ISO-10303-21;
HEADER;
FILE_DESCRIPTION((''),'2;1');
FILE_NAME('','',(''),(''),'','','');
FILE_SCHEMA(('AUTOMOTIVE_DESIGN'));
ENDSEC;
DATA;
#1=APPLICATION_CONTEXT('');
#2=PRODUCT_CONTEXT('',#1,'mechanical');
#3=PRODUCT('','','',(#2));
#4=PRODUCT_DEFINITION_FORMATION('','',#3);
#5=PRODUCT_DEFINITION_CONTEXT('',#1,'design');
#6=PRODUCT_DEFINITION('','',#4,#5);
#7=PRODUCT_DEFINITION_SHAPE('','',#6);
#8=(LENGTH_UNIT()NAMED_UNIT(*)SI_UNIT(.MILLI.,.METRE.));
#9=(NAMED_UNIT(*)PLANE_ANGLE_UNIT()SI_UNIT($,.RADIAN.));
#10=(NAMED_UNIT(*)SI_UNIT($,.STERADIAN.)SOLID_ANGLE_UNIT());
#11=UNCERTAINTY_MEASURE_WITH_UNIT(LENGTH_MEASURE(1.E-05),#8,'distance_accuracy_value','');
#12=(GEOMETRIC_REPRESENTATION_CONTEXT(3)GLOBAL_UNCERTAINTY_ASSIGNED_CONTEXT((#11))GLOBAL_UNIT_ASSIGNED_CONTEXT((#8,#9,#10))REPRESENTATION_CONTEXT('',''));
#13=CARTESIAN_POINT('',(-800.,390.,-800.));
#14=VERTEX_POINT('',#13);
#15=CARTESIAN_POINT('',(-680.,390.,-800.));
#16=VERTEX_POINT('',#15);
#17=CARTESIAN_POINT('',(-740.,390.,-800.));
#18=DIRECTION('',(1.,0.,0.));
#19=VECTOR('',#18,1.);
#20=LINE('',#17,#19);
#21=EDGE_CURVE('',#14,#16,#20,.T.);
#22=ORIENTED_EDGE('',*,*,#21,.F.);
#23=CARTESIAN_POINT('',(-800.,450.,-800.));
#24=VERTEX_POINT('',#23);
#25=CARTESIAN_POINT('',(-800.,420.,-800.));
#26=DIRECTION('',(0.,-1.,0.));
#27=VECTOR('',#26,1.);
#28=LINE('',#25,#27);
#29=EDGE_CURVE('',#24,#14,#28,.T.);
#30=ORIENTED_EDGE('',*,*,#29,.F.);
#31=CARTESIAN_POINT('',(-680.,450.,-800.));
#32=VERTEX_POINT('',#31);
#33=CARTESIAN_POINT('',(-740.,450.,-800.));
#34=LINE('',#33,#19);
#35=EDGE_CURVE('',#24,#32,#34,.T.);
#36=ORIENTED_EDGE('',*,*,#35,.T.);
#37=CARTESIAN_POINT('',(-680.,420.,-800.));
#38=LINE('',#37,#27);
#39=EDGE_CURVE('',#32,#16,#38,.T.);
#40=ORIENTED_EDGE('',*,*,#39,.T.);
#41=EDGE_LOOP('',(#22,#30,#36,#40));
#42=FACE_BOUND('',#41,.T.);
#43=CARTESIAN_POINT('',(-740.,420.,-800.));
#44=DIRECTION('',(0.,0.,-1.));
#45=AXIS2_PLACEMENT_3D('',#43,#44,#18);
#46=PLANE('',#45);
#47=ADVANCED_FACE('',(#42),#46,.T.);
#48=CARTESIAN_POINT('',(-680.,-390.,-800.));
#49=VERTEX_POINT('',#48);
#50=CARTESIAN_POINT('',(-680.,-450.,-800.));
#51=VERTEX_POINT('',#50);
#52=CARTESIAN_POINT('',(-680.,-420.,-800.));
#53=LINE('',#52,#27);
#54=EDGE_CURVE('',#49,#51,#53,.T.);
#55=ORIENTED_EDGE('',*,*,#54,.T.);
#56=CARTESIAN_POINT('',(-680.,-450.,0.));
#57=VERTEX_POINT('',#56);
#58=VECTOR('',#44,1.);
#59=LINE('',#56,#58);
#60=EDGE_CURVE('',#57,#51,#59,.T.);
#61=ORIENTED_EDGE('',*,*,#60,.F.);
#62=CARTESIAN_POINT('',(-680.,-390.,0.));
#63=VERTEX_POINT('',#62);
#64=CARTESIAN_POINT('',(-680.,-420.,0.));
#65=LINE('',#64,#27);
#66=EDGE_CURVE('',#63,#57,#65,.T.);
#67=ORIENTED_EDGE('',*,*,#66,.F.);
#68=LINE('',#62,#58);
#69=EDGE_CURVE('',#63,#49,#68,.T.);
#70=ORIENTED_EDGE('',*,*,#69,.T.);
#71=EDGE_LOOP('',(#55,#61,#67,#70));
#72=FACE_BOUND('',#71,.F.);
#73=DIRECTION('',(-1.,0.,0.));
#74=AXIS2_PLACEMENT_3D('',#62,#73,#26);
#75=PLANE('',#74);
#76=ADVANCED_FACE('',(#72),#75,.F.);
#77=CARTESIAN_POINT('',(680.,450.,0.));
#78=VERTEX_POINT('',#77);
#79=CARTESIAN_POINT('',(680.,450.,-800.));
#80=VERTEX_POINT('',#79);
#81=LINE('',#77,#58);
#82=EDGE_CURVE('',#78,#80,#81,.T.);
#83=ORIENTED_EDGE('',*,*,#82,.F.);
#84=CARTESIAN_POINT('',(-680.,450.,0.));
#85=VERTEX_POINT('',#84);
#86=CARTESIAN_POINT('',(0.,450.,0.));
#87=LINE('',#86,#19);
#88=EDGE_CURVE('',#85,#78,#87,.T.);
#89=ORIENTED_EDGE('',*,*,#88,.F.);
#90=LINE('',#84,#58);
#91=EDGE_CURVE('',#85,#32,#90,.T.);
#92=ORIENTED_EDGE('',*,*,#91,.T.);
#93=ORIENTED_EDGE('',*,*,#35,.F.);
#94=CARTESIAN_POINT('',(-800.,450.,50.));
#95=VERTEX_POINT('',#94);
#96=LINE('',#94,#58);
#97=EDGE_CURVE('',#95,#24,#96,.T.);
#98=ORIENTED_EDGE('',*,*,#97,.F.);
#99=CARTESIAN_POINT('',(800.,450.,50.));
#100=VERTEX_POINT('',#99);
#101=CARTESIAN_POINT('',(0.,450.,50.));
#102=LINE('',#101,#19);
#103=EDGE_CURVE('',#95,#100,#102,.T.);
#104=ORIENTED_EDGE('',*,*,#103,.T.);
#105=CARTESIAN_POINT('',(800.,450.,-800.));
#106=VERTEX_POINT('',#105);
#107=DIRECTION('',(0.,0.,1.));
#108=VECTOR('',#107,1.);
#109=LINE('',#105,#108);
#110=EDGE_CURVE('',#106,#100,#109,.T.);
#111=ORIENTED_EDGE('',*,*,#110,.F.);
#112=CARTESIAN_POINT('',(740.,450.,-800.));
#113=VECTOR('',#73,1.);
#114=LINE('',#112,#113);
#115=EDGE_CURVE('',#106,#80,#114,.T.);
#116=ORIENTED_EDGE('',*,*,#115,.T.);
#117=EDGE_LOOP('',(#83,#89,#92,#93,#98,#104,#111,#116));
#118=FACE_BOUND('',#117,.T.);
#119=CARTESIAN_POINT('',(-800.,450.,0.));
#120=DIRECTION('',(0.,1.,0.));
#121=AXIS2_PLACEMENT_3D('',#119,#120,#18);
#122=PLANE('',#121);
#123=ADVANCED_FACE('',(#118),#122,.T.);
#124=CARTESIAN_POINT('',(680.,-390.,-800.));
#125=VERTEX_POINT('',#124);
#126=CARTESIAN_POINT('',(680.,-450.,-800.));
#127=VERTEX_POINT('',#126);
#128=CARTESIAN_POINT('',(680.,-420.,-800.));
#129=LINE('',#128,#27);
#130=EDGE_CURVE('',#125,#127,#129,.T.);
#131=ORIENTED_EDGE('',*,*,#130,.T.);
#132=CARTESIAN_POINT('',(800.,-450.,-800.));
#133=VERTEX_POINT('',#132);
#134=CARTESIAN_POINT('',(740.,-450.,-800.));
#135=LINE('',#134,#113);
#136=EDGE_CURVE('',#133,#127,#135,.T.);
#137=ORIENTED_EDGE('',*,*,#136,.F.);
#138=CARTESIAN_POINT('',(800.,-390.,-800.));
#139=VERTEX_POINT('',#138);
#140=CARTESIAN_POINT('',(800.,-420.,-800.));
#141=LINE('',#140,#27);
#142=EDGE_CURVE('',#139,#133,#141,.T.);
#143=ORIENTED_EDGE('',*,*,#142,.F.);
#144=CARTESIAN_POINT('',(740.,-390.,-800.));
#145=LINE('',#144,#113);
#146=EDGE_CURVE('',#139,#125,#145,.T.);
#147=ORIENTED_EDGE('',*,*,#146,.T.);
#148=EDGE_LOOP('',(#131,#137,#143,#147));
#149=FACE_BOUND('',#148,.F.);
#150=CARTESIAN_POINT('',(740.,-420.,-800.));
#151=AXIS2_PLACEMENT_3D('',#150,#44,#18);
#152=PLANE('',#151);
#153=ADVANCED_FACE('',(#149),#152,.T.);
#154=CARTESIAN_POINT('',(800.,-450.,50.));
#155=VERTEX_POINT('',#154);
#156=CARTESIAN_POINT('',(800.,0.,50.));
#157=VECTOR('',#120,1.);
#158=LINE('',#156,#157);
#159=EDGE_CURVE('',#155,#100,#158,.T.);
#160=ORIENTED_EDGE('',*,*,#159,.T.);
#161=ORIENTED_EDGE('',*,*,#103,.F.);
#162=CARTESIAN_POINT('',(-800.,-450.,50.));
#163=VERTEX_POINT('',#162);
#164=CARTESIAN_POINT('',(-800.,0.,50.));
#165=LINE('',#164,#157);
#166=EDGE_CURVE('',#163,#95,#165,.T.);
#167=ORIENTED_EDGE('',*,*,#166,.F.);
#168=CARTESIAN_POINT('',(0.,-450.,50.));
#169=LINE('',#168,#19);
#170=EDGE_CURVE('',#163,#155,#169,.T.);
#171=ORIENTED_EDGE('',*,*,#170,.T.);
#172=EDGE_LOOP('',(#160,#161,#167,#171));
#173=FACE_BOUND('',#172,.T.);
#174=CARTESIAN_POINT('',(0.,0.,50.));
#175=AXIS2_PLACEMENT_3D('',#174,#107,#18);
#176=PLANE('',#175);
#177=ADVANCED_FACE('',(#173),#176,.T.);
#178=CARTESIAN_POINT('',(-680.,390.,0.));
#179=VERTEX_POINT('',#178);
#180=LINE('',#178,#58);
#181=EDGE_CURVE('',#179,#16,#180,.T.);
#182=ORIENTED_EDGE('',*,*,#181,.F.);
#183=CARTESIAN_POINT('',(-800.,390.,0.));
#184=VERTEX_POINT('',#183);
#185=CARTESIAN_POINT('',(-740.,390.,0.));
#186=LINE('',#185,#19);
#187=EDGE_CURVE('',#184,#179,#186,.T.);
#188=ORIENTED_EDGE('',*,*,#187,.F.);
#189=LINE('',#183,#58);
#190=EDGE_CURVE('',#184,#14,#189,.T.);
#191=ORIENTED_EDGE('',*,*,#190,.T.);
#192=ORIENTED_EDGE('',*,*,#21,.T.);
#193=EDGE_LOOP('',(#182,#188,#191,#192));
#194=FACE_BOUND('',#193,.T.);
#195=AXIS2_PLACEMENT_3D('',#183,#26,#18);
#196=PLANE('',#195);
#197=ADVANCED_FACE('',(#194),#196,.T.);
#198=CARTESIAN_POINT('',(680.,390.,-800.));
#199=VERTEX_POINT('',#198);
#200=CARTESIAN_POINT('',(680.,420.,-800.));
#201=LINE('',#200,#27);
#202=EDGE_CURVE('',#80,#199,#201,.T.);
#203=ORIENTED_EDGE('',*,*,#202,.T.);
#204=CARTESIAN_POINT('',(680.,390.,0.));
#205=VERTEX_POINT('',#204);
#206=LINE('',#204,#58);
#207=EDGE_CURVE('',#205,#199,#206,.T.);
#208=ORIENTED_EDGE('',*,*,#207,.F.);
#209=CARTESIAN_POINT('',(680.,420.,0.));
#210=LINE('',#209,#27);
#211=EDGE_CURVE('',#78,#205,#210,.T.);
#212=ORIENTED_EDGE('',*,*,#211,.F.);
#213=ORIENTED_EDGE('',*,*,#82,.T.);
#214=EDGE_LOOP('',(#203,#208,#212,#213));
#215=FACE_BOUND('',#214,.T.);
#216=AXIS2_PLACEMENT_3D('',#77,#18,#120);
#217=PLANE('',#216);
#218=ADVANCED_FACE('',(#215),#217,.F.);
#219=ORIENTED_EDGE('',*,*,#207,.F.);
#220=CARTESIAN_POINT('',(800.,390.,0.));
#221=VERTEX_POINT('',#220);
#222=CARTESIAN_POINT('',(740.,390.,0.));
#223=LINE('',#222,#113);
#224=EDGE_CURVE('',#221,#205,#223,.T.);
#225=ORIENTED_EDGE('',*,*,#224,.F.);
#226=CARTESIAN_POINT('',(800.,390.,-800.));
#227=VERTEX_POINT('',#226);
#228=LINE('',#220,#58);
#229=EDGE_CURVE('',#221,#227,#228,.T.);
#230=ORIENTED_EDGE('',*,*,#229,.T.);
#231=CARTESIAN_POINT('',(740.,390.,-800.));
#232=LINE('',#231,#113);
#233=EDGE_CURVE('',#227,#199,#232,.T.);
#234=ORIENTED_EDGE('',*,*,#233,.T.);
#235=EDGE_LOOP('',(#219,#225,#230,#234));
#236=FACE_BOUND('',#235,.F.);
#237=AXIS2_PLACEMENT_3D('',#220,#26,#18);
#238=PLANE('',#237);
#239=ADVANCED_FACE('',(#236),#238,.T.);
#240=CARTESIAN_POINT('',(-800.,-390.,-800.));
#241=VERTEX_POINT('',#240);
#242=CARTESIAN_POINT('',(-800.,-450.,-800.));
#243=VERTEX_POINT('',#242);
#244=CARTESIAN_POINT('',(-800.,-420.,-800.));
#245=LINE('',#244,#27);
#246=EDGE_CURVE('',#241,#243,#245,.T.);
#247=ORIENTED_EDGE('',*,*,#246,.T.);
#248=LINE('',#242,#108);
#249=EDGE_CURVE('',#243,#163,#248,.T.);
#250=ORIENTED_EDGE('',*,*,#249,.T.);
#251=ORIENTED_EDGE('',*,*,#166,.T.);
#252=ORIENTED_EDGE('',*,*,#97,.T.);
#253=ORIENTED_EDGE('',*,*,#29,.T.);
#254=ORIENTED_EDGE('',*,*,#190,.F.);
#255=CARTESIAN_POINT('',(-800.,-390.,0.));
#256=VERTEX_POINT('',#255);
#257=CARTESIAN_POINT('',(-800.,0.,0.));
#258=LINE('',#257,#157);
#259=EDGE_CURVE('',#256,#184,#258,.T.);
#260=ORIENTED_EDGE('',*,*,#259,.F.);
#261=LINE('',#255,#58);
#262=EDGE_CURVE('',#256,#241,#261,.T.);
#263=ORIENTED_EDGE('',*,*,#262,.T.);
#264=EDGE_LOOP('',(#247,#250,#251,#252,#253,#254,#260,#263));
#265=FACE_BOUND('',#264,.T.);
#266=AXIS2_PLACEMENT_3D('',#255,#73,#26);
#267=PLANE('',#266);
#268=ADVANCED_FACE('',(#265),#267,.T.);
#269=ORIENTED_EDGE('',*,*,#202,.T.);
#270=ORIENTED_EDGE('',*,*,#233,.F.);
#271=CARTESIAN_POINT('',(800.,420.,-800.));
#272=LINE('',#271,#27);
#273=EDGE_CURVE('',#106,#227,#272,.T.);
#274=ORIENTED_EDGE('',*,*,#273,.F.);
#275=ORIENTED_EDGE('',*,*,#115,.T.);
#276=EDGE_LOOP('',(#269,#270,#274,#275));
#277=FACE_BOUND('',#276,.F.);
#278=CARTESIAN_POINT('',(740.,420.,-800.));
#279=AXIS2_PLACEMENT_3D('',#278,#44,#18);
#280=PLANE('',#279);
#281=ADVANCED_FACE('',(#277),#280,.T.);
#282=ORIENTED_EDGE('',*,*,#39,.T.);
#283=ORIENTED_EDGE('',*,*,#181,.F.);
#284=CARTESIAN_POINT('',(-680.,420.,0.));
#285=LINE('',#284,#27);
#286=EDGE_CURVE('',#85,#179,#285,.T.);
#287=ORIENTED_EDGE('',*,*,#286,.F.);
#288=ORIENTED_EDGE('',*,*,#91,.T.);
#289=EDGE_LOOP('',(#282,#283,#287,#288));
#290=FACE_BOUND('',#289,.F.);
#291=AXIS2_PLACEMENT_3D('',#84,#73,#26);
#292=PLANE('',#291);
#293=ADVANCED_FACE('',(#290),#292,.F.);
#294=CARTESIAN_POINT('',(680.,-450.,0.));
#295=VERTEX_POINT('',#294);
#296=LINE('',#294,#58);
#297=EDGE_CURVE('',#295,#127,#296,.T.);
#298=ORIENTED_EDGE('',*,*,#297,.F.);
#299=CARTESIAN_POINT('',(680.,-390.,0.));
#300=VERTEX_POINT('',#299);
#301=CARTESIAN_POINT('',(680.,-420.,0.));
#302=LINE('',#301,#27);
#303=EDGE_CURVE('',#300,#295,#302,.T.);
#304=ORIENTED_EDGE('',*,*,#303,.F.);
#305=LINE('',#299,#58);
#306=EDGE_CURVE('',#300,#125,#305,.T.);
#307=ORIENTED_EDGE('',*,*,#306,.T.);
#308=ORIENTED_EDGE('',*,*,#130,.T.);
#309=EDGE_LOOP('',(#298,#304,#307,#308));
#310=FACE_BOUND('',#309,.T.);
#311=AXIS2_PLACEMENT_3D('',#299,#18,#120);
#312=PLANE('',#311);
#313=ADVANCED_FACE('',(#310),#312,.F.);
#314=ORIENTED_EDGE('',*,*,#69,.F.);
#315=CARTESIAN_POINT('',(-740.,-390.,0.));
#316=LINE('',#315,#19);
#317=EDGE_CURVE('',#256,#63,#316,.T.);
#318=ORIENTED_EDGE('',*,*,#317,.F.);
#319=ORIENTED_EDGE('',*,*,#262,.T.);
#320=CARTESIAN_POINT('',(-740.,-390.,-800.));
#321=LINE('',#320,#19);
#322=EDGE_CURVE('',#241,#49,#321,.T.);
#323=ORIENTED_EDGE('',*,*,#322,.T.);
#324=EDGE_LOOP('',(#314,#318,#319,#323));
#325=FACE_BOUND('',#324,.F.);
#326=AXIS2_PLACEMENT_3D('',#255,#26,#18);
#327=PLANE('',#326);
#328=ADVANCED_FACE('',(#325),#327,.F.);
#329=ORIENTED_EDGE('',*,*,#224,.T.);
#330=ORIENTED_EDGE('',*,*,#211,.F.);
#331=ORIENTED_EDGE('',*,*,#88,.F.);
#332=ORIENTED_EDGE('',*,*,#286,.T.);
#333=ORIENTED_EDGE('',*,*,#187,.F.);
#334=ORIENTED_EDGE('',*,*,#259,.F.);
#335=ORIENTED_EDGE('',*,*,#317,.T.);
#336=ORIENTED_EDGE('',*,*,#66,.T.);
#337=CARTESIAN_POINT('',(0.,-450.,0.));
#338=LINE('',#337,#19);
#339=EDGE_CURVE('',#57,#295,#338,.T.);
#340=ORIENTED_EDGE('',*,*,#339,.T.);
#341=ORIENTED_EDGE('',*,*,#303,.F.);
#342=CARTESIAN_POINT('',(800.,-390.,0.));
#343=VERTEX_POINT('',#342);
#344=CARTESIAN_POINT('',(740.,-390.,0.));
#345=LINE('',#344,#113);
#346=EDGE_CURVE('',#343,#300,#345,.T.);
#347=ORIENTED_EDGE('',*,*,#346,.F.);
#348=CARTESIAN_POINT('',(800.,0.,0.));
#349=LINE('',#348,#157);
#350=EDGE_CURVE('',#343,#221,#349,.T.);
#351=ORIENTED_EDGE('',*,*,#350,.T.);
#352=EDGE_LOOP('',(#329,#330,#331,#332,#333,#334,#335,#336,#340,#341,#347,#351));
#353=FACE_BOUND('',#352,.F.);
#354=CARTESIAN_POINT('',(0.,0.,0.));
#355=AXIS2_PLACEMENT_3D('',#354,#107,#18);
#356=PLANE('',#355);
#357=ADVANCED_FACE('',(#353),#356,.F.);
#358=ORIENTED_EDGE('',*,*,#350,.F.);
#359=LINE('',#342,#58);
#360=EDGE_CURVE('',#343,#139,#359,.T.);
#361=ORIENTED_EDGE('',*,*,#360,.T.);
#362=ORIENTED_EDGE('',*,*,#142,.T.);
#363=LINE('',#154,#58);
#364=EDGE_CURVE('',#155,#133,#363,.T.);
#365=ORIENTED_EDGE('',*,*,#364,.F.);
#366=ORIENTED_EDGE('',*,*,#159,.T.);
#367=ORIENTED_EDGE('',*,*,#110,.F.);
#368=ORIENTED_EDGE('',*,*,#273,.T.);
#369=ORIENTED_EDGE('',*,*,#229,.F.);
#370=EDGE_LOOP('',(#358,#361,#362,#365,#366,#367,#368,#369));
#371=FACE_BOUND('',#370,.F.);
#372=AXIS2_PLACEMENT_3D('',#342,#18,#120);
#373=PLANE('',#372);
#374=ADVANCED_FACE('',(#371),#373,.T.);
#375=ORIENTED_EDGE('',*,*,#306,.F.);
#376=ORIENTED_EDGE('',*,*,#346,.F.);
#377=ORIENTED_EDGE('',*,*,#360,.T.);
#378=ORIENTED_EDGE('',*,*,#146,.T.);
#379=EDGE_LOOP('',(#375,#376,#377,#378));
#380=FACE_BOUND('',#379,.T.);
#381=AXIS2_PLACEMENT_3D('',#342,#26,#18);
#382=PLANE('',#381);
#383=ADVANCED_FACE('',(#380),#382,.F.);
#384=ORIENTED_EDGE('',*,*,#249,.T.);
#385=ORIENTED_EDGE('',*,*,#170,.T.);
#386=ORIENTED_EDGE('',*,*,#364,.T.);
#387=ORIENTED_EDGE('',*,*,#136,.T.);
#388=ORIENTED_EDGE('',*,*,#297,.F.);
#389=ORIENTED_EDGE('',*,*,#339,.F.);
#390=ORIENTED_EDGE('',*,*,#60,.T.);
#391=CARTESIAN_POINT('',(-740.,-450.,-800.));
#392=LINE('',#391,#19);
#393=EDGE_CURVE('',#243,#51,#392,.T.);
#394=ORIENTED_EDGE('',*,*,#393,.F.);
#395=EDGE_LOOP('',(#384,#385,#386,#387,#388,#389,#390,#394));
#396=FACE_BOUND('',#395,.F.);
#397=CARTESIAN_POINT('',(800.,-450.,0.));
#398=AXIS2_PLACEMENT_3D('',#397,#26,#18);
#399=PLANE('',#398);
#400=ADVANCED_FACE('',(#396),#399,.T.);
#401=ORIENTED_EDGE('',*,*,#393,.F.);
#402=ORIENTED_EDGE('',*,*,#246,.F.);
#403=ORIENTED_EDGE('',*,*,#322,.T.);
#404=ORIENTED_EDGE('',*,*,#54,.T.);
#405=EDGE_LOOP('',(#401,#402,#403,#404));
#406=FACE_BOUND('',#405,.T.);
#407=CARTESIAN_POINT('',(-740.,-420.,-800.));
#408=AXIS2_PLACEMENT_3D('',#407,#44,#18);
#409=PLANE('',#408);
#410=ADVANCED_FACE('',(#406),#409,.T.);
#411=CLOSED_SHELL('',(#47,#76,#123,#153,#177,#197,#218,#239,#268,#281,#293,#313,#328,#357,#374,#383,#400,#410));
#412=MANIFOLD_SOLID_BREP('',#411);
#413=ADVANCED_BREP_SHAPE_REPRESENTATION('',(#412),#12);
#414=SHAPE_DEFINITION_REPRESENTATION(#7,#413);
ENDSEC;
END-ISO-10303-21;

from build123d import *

# Parameters (mm, degrees)
F0_W     = 1600
F0_H     = 900
F1_DEPTH = 50
F2_W     = 120
F2_H     = 60
F3_DEPTH = 800


# Not quite as in the source:
# - a pattern or mirror of a feature is missing from the dataset's text; its kind, count and spacing are read off the source's solid


with BuildPart() as f1:
    # F0 (on Top) → F1 (new body)
    with BuildSketch(Plane.XY):
        Rectangle(F0_W, F0_H)
    extrude(amount=F1_DEPTH)

    # F2 (on face) → F3 (join)
    with BuildSketch(Plane(origin=(0, 0, 0), x_dir=(1, 0, 0), z_dir=(0, 0, -1))):
        with Locations((-740, 420)):
            Rectangle(F2_W, F2_H)
        with Locations((-740, -420)):
            Rectangle(F2_W, F2_H)
    f3 = extrude(amount=F3_DEPTH)

    # F3_copies: F3 across plane
    add(f3.mirror(Plane(origin=(0, 0, 0), x_dir=(0, 0, 1), z_dir=(1, 0, 0))))


solid = f1.part
